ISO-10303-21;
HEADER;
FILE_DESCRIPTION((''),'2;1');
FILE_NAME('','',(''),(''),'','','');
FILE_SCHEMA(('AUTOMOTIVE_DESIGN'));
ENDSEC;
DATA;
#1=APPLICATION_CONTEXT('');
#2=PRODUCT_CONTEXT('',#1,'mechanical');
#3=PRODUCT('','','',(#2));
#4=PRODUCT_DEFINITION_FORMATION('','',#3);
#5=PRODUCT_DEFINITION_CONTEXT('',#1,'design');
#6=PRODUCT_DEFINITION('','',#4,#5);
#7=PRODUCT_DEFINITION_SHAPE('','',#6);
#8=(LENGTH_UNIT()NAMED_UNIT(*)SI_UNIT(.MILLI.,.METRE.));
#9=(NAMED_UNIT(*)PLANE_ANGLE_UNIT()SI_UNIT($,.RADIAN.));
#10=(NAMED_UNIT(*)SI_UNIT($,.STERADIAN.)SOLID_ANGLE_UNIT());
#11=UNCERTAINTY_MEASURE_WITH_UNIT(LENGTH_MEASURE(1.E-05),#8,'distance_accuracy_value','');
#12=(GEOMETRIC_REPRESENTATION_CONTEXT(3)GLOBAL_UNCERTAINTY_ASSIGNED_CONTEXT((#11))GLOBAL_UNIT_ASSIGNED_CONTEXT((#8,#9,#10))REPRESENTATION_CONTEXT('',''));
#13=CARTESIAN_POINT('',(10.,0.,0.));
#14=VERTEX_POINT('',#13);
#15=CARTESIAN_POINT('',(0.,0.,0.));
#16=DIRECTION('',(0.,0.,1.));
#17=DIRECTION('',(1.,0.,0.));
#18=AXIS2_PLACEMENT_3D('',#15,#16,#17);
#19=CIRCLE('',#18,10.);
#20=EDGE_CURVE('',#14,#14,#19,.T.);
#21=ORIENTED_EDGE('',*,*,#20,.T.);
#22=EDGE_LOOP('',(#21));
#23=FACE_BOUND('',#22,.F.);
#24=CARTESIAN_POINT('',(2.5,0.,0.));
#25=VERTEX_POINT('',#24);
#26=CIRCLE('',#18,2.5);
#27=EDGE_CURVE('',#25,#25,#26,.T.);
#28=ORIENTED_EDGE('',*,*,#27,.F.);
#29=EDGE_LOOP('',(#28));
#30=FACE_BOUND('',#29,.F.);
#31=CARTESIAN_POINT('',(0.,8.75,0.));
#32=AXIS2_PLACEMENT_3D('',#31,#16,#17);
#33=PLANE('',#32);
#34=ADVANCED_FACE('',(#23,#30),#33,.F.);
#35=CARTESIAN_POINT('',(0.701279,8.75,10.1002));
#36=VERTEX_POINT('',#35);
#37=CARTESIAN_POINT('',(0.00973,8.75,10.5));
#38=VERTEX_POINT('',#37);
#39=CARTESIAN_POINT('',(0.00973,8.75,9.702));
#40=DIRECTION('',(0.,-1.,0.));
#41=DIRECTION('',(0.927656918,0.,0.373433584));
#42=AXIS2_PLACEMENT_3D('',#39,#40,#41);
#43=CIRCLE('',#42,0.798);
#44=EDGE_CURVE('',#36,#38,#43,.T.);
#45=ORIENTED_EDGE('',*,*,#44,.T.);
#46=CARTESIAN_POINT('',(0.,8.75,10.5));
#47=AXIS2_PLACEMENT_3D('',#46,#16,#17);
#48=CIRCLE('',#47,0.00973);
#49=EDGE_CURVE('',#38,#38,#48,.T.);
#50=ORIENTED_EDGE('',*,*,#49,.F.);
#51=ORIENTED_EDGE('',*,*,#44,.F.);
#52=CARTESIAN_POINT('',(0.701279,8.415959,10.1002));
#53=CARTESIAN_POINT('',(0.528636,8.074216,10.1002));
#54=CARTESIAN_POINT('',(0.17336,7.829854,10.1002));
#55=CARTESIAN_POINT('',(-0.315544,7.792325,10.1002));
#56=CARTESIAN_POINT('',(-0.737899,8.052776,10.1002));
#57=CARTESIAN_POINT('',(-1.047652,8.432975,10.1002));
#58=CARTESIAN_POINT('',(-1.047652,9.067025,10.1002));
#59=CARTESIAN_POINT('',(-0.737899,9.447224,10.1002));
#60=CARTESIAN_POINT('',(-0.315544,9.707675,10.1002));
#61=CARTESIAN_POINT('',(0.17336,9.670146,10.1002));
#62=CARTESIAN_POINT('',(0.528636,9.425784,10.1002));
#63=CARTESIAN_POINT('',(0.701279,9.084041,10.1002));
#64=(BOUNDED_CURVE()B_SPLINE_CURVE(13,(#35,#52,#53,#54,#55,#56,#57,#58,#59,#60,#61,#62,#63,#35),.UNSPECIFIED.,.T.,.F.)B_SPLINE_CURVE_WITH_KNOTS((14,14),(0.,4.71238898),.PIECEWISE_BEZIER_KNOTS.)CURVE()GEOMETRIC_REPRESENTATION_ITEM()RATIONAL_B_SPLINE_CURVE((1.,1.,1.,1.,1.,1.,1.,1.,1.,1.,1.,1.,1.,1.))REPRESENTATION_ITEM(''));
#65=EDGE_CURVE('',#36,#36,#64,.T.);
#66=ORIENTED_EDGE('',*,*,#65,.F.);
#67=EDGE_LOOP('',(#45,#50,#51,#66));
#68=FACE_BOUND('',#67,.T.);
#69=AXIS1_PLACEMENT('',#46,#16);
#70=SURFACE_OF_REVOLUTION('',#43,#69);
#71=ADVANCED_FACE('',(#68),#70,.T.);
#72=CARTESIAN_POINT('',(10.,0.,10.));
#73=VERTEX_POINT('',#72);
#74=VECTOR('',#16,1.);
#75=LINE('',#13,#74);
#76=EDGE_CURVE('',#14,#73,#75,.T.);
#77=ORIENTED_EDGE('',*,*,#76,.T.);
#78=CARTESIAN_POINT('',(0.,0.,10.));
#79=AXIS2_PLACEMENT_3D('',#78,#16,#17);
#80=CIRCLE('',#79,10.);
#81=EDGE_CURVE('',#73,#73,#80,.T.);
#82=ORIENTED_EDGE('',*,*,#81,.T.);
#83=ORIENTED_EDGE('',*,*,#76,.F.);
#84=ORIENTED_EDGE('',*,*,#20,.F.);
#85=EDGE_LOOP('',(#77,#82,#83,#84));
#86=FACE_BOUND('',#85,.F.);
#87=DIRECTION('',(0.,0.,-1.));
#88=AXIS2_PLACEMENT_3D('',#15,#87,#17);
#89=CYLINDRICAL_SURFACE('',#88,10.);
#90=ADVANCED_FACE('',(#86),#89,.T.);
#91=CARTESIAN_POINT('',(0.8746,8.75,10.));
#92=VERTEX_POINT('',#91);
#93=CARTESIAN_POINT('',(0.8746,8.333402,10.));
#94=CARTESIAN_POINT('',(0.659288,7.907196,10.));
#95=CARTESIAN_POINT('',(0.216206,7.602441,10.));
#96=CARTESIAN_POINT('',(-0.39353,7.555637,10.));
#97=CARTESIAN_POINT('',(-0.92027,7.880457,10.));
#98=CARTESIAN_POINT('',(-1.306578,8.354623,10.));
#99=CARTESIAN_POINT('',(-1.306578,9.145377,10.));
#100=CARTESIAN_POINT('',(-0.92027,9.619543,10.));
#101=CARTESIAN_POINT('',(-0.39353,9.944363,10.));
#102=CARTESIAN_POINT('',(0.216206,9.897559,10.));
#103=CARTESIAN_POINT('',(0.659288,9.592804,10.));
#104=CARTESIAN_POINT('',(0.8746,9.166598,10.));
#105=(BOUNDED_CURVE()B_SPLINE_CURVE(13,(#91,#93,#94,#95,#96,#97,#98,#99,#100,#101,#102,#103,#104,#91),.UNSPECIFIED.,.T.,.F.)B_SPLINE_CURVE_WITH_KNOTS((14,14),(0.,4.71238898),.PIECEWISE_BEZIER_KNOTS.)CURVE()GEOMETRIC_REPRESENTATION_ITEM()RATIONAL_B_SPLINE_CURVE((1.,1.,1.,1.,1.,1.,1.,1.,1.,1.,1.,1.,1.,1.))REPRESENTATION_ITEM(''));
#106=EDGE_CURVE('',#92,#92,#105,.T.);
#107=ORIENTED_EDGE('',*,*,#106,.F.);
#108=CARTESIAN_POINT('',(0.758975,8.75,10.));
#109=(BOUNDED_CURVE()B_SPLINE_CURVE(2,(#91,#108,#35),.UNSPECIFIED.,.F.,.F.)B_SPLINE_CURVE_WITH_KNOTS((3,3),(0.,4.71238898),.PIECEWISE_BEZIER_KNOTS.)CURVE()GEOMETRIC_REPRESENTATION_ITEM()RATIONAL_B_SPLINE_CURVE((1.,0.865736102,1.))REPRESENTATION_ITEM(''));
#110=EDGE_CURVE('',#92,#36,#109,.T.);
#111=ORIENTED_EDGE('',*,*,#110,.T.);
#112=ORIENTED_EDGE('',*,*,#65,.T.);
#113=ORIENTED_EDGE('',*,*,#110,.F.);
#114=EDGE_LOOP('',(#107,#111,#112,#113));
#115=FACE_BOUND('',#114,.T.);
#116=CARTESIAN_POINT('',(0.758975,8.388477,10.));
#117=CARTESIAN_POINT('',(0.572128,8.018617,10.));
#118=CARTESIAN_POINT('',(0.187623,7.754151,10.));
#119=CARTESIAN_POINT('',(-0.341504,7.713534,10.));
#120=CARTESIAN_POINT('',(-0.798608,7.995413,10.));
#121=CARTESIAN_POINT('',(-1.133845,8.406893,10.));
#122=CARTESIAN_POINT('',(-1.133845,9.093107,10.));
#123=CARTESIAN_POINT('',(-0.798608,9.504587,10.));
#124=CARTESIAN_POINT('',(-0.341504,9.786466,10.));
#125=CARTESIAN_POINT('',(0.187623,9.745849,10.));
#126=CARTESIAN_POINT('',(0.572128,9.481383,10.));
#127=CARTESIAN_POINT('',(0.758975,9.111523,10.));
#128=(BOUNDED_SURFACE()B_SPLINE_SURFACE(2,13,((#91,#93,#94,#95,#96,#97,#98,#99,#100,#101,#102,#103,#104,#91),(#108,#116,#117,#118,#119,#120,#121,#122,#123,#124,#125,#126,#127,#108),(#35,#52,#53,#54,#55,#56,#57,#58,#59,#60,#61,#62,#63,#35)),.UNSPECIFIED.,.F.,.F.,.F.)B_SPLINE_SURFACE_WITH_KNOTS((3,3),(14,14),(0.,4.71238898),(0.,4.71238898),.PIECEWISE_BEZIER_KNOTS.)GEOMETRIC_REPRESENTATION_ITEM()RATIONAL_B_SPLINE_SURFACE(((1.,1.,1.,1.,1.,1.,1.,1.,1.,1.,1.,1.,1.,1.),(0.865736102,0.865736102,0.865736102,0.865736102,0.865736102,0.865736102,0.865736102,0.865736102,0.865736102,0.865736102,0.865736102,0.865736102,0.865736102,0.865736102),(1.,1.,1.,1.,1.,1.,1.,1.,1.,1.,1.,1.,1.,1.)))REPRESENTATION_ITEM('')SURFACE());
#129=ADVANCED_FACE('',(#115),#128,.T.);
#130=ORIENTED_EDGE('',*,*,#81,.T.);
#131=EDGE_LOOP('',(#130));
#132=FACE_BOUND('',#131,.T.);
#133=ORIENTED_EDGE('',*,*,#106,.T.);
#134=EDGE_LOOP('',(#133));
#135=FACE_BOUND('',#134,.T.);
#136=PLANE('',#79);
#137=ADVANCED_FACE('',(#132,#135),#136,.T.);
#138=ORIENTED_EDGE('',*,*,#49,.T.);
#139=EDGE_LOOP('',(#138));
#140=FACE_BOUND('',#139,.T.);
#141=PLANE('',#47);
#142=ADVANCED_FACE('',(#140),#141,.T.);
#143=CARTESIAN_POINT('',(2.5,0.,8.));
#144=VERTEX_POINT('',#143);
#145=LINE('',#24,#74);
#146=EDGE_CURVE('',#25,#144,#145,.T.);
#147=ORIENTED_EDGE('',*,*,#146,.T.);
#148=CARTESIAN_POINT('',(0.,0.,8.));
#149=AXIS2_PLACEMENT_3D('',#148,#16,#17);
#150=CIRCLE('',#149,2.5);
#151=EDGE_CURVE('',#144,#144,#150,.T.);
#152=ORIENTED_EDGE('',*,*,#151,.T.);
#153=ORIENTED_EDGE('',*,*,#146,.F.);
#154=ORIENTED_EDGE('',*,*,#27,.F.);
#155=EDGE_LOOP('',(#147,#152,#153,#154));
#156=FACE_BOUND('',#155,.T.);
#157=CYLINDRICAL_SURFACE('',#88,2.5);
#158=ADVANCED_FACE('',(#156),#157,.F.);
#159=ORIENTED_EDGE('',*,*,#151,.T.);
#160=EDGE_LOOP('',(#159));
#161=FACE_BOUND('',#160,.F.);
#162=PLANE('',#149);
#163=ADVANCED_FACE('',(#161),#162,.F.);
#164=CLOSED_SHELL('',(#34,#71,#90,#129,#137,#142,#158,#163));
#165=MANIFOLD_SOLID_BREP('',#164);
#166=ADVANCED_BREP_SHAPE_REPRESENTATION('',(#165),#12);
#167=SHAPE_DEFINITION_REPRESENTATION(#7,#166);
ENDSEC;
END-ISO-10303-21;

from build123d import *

# Parameters (mm, degrees)
F0_R     = 10
F0_R_2   = 2.5
F0_R_3   = 0.75
F1_DEPTH = 10
F2_DEPTH = 8
F3_DEPTH = 10.5
F5_R     = 0.2


# Not quite as in the source:
# - a fillet or chamfer that OpenCascade refuses, or shapes differently, is made with other operations: its cross-section is extruded or revolved along the edge and cut away or added


with BuildPart() as f1:
    # F0 (on Top) → F1 (new body)
    with BuildSketch(Plane.XY):
        Circle(F0_R)
        Circle(F0_R_2, mode=Mode.SUBTRACT)
        with Locations((0, 8.75)):
            Circle(F0_R_3, mode=Mode.SUBTRACT)
        with Locations((0, 8.75)):
            Circle(F0_R_3)
        Circle(F0_R_2)
    extrude(amount=F1_DEPTH)

    # F0 (on Top) → F2 (cut)
    with BuildSketch(Plane.XY):
        Circle(F0_R_2)
    extrude(amount=F2_DEPTH, mode=Mode.SUBTRACT)

    # F0 (on Top) → F3 (join)
    with BuildSketch(Plane.XY):
        with Locations((0, 8.75)):
            Circle(F0_R_3)
    extrude(amount=F3_DEPTH)

    # F4: fillet of radius 0.798 on 1 edges, made by hand

    # F4_s1 → F4_t2 (revolve, cut)
    with BuildSketch(Plane.XZ.offset(-8.75)):
        with BuildLine():
            ThreePointArc((0.75, 10), (0.4563840077, 10.3632896491), (0.0097297791, 10.5))
            Line((0.0097297791, 10.5), (0.75, 10.5))
            Line((0.75, 10.5), (0.75, 10))
        make_face()
    revolve(axis=Axis((0, 8.75, 10.5), (0, 0, 1)), mode=Mode.SUBTRACT)

    # F5
    f5_edges = [f1.edges().sort_by_distance(p)[0] for p in [
        (-0.75, 8.75, 10),
    ]]
    fillet(f5_edges, radius=F5_R)


solid = f1.part
